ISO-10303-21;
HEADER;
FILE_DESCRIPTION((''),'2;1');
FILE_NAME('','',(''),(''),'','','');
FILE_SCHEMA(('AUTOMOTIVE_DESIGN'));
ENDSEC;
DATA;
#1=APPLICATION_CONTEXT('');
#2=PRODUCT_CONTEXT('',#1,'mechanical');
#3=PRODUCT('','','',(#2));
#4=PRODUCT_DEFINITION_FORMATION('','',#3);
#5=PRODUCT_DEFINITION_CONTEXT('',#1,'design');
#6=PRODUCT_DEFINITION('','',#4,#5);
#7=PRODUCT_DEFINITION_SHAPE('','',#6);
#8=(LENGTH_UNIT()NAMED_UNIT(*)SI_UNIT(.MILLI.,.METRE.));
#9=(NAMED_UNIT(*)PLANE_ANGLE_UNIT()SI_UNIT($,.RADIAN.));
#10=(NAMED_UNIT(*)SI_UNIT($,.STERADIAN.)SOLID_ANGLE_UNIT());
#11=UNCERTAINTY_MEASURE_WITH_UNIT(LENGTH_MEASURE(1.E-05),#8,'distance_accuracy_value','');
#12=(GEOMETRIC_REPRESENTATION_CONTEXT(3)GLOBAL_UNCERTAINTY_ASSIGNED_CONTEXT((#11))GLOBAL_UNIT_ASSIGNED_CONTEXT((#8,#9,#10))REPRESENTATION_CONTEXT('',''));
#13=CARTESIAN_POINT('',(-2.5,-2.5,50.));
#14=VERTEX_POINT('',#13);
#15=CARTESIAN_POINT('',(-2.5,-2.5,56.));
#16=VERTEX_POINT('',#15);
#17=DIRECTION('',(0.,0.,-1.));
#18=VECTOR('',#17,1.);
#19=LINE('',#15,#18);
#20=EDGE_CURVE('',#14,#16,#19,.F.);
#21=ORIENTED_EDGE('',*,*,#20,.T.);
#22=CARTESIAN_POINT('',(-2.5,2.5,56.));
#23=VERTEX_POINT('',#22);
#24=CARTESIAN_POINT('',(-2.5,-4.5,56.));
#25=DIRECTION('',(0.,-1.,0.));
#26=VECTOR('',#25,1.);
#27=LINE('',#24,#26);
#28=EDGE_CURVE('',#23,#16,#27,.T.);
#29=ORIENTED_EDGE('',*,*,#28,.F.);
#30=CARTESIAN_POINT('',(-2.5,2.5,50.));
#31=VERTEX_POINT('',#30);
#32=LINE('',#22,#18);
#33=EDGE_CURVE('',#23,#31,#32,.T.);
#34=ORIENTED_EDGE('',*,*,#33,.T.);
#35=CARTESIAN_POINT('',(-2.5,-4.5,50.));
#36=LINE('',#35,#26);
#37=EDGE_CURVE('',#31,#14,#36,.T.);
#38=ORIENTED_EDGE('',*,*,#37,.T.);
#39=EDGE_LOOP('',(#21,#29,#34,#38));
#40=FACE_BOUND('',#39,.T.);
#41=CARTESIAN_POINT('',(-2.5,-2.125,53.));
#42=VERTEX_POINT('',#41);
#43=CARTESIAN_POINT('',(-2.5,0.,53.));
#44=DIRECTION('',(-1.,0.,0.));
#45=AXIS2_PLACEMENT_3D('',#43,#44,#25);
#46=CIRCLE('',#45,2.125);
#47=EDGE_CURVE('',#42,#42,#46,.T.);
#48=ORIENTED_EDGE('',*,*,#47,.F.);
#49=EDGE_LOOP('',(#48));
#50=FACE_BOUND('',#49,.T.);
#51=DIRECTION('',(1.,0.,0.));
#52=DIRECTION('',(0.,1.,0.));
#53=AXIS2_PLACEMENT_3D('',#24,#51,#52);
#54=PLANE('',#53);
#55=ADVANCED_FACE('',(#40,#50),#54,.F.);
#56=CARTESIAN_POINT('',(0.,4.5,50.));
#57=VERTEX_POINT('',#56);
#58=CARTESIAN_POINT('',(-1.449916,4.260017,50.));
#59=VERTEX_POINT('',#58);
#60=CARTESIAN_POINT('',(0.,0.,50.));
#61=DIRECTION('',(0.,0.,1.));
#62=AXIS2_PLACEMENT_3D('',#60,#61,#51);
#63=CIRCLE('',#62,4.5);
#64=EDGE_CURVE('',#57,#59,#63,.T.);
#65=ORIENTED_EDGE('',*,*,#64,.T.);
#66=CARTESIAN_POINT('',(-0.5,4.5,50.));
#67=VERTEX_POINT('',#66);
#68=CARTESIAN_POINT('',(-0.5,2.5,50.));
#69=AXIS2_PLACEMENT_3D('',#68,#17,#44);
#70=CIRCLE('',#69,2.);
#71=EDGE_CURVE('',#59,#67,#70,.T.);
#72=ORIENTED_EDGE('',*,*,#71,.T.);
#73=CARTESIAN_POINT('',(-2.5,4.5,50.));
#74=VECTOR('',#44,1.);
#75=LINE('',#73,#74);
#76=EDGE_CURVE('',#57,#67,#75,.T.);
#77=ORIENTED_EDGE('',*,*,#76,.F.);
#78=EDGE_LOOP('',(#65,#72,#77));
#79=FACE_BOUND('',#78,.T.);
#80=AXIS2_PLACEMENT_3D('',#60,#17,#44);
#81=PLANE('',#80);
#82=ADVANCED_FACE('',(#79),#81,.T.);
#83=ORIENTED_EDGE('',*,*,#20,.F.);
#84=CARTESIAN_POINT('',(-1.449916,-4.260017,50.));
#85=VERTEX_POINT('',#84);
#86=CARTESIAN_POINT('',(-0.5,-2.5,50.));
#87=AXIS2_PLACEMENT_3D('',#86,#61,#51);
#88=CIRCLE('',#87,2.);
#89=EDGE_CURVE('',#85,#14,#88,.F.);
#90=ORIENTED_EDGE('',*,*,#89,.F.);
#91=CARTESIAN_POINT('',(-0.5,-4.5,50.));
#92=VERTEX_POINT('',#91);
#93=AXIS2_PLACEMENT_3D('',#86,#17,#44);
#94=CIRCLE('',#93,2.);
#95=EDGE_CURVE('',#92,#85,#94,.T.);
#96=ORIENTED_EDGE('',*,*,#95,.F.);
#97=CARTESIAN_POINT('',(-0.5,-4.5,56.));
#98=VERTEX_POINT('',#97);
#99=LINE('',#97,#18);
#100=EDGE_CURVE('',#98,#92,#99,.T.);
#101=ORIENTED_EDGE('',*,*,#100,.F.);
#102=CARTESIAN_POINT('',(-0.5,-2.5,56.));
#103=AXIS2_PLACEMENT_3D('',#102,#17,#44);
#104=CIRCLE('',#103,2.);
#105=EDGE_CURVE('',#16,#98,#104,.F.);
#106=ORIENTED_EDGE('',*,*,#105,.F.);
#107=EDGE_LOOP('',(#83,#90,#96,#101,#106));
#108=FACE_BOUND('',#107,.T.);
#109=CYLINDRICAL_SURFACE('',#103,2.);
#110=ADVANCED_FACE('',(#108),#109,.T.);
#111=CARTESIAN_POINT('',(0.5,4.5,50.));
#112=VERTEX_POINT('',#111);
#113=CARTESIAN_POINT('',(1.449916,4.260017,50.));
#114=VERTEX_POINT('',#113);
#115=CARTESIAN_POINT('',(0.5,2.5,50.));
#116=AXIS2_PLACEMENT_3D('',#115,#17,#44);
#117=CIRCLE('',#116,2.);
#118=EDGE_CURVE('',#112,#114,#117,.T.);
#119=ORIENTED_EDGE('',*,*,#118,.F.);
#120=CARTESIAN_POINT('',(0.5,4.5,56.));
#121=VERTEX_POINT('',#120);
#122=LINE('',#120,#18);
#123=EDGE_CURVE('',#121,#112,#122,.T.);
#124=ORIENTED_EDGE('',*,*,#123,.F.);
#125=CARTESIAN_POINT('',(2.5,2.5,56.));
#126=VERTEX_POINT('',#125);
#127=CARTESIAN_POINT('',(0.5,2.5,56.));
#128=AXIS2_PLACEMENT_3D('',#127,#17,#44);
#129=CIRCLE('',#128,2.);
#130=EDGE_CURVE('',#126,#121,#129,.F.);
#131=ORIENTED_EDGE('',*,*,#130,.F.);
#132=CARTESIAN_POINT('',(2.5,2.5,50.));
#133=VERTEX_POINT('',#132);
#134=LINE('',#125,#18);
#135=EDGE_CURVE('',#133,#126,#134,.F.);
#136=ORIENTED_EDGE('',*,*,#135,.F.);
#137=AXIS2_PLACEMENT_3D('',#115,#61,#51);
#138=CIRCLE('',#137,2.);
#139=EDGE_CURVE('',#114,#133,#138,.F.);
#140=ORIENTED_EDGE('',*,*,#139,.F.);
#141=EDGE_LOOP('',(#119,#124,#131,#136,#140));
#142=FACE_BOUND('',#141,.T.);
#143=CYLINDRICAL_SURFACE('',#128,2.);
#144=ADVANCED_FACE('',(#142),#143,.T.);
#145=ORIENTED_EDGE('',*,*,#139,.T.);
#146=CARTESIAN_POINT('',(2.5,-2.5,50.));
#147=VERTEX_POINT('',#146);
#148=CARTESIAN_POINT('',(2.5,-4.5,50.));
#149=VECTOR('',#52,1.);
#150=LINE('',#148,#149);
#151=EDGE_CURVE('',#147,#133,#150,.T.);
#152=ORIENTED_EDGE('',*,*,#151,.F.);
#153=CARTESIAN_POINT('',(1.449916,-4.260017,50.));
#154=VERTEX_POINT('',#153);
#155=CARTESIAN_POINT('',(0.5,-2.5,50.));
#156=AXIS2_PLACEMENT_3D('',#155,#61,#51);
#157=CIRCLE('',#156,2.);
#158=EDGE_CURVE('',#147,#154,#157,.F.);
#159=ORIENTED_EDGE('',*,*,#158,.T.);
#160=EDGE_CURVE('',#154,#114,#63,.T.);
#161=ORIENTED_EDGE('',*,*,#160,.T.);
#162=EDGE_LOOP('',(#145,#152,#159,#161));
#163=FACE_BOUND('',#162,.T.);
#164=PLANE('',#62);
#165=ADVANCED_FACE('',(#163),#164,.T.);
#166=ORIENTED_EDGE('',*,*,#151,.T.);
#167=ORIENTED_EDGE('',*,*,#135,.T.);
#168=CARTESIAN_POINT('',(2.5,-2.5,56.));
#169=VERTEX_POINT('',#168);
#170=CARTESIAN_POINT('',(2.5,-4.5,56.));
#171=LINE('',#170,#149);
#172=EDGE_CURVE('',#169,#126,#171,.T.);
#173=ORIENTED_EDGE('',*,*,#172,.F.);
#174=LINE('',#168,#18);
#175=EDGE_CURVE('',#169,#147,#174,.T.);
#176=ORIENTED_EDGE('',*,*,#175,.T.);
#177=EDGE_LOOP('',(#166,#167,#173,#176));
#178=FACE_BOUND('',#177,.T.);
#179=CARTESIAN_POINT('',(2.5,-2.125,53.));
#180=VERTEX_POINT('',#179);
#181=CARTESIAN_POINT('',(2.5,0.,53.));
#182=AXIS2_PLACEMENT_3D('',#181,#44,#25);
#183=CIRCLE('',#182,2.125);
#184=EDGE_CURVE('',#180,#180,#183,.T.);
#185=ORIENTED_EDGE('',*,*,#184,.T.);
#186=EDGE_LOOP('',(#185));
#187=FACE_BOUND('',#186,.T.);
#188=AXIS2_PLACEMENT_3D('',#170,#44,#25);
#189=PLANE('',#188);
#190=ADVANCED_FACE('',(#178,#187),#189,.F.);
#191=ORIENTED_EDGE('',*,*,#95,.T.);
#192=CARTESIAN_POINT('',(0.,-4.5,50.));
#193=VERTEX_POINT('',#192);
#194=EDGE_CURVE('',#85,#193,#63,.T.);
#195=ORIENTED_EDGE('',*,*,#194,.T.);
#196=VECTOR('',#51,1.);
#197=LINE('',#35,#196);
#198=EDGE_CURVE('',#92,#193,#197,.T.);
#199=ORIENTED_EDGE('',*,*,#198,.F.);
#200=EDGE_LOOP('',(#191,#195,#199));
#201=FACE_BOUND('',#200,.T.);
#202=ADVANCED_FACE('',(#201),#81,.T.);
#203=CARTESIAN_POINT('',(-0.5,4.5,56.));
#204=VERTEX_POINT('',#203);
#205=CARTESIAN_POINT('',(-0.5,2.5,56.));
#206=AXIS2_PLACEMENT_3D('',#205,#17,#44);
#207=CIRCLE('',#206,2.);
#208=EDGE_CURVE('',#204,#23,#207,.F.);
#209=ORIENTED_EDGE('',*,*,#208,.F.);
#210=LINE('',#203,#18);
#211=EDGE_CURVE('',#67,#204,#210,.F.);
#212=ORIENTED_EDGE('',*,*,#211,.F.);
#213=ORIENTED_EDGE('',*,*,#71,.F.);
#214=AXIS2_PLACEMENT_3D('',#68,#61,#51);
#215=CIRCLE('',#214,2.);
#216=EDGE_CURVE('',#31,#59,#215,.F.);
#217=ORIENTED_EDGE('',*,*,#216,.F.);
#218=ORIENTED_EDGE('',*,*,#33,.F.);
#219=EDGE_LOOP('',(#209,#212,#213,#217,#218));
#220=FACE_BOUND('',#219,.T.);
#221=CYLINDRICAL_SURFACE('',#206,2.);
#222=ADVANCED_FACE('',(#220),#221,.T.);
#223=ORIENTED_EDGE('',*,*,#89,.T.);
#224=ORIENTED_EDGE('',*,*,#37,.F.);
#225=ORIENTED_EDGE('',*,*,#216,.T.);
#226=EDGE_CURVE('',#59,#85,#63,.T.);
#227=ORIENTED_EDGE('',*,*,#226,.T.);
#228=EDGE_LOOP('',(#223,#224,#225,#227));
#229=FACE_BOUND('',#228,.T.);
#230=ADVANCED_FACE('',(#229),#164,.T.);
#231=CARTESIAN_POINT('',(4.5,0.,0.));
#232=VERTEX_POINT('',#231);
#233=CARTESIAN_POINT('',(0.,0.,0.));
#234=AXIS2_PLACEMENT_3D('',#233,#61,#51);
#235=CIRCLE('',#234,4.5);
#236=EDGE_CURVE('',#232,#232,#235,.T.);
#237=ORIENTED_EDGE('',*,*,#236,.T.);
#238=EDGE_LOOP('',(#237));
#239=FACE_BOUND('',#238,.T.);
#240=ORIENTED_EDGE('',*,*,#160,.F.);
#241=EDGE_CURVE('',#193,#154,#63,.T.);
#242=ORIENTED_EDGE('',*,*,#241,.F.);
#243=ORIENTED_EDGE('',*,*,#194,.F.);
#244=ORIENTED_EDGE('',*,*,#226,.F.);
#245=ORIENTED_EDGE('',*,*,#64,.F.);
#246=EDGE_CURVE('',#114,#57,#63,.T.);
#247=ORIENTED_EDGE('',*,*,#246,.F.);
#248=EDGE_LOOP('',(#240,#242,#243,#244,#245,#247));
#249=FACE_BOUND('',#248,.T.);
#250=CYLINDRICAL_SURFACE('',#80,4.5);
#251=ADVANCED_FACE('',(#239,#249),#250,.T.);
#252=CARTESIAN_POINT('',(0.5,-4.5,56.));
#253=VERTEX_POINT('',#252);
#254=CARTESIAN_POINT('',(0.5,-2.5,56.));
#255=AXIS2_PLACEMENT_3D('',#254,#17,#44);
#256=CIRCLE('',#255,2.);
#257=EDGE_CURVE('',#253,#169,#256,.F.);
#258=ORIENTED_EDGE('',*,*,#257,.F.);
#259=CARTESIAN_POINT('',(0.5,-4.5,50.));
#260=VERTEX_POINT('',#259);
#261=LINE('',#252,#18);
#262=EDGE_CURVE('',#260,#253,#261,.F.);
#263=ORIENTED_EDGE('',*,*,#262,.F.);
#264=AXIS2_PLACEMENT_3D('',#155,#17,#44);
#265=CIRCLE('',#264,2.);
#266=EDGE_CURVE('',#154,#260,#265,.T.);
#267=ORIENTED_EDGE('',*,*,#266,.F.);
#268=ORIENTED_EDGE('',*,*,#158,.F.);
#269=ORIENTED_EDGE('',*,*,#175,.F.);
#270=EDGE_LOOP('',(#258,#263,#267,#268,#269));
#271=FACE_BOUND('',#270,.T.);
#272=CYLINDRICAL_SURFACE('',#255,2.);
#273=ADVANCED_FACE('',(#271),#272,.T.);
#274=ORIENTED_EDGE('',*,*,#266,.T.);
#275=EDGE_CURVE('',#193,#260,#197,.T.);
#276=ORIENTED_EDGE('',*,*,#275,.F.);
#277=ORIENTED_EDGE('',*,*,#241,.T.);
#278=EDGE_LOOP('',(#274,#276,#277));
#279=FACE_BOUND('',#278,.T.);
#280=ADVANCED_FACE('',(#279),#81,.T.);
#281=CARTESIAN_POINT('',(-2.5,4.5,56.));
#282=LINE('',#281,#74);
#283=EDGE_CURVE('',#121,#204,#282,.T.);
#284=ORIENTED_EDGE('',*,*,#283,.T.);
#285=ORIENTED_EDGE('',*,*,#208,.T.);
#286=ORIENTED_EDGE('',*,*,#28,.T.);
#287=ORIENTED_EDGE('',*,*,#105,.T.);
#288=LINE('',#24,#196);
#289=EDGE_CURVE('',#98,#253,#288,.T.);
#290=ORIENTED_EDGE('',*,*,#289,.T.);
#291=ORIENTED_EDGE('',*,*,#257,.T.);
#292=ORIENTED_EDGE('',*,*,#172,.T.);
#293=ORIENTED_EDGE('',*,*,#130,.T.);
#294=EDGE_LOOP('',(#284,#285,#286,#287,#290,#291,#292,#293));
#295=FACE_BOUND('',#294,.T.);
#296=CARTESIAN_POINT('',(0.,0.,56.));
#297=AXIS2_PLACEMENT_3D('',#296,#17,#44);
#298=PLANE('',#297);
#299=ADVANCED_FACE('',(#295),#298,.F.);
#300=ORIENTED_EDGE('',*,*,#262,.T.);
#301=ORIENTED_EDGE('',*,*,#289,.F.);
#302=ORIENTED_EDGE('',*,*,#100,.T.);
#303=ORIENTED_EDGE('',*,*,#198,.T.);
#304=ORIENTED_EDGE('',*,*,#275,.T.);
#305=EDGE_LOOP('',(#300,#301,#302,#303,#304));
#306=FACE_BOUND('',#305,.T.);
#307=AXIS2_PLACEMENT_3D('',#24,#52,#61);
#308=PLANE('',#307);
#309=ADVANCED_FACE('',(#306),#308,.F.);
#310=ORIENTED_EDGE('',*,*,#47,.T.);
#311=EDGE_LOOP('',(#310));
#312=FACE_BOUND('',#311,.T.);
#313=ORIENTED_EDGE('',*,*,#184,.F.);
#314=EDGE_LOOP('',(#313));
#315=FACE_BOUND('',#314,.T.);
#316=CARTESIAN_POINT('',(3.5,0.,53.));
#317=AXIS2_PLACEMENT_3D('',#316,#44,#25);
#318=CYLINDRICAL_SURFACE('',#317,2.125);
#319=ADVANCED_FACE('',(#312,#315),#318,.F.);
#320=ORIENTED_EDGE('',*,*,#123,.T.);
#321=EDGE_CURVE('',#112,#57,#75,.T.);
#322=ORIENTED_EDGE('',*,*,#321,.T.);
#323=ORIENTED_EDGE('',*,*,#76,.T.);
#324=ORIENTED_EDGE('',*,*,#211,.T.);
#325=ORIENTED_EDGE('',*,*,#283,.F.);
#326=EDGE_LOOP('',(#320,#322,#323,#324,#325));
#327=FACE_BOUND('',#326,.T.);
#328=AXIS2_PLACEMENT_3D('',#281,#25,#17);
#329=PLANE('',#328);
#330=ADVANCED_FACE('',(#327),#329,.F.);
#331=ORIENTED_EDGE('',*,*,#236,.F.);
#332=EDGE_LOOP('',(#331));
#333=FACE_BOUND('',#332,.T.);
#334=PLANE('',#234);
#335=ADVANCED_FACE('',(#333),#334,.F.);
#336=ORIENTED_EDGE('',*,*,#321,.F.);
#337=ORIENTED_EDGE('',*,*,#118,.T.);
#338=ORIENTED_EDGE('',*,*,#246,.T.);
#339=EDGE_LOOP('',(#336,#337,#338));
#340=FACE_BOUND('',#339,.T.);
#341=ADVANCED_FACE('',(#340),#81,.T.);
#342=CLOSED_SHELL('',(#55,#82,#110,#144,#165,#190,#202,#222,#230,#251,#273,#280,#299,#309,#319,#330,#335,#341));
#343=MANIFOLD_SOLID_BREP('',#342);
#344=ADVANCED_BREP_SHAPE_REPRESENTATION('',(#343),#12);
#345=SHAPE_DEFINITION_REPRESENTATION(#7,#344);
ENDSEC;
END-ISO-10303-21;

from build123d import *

# Parameters (mm, degrees)
ESBO_O1_R                = 4.5
RESSALTO_EXTRUS_O1_DEPTH = 50
ESBO_O2_W                = 5
ESBO_O2_H                = 9
RESSALTO_EXTRUS_O2_DEPTH = 6
FILETE1_R                = 2
ESBO_O3_R                = 2.125
CORTE_EXTRUS_O1_DEPTH    = 6


with BuildPart() as part:
    # Esboço1 → Ressalto-extrusão1 (new body)
    with BuildSketch(Plane.XY):
        Circle(ESBO_O1_R)
    extrude(amount=RESSALTO_EXTRUS_O1_DEPTH)

    # Esboço2 → Ressalto-extrusão2 (add)
    with BuildSketch(Plane.XY.offset(50)):
        Rectangle(ESBO_O2_W, ESBO_O2_H)
    extrude(amount=RESSALTO_EXTRUS_O2_DEPTH)

    # Filete1
    # the kernel refuses this fillet: 2 mm, written as the material it takes off along each edge
    with BuildSketch(Plane(origin=(2.5, -4.5, 50), x_dir=(0, 1, 0), z_dir=(0, 0, 1)), Plane(origin=(-2.5, 4.5, 50), x_dir=(0, -1, 0), z_dir=(0, 0, 1)), Plane(origin=(-2.5, -4.5, 50), x_dir=(1, 0, 0), z_dir=(0, 0, 1))) as filete1_piece_1:
        with BuildLine():
            CenterArc((FILETE1_R, FILETE1_R), FILETE1_R, 180, 90)
            Line((0, FILETE1_R), (0, 0))
            Line((0, 0), (FILETE1_R, 0))
        make_face()
    extrude(amount=11, mode=Mode.SUBTRACT)
    with BuildSketch(Plane(origin=(2.5, 4.5, 50), x_dir=(0, -1, 0), z_dir=(0, 0, 1))) as filete1_piece_2:
        with BuildLine():
            CenterArc((FILETE1_R, -FILETE1_R), FILETE1_R, 90, 90)
            Line((0, -FILETE1_R), (0, 0))
            Line((0, 0), (FILETE1_R, 0))
        make_face()
    extrude(amount=11, mode=Mode.SUBTRACT)

    # Esboço3 → Corte-extrusão1 (cut)
    with BuildSketch(Plane.ZY.offset(2.5)):
        with Locations(Location((53, 0, 0), (0, 0, 270))):
            Circle(ESBO_O3_R)
    extrude(amount=-CORTE_EXTRUS_O1_DEPTH, mode=Mode.SUBTRACT)


solid = part.part
